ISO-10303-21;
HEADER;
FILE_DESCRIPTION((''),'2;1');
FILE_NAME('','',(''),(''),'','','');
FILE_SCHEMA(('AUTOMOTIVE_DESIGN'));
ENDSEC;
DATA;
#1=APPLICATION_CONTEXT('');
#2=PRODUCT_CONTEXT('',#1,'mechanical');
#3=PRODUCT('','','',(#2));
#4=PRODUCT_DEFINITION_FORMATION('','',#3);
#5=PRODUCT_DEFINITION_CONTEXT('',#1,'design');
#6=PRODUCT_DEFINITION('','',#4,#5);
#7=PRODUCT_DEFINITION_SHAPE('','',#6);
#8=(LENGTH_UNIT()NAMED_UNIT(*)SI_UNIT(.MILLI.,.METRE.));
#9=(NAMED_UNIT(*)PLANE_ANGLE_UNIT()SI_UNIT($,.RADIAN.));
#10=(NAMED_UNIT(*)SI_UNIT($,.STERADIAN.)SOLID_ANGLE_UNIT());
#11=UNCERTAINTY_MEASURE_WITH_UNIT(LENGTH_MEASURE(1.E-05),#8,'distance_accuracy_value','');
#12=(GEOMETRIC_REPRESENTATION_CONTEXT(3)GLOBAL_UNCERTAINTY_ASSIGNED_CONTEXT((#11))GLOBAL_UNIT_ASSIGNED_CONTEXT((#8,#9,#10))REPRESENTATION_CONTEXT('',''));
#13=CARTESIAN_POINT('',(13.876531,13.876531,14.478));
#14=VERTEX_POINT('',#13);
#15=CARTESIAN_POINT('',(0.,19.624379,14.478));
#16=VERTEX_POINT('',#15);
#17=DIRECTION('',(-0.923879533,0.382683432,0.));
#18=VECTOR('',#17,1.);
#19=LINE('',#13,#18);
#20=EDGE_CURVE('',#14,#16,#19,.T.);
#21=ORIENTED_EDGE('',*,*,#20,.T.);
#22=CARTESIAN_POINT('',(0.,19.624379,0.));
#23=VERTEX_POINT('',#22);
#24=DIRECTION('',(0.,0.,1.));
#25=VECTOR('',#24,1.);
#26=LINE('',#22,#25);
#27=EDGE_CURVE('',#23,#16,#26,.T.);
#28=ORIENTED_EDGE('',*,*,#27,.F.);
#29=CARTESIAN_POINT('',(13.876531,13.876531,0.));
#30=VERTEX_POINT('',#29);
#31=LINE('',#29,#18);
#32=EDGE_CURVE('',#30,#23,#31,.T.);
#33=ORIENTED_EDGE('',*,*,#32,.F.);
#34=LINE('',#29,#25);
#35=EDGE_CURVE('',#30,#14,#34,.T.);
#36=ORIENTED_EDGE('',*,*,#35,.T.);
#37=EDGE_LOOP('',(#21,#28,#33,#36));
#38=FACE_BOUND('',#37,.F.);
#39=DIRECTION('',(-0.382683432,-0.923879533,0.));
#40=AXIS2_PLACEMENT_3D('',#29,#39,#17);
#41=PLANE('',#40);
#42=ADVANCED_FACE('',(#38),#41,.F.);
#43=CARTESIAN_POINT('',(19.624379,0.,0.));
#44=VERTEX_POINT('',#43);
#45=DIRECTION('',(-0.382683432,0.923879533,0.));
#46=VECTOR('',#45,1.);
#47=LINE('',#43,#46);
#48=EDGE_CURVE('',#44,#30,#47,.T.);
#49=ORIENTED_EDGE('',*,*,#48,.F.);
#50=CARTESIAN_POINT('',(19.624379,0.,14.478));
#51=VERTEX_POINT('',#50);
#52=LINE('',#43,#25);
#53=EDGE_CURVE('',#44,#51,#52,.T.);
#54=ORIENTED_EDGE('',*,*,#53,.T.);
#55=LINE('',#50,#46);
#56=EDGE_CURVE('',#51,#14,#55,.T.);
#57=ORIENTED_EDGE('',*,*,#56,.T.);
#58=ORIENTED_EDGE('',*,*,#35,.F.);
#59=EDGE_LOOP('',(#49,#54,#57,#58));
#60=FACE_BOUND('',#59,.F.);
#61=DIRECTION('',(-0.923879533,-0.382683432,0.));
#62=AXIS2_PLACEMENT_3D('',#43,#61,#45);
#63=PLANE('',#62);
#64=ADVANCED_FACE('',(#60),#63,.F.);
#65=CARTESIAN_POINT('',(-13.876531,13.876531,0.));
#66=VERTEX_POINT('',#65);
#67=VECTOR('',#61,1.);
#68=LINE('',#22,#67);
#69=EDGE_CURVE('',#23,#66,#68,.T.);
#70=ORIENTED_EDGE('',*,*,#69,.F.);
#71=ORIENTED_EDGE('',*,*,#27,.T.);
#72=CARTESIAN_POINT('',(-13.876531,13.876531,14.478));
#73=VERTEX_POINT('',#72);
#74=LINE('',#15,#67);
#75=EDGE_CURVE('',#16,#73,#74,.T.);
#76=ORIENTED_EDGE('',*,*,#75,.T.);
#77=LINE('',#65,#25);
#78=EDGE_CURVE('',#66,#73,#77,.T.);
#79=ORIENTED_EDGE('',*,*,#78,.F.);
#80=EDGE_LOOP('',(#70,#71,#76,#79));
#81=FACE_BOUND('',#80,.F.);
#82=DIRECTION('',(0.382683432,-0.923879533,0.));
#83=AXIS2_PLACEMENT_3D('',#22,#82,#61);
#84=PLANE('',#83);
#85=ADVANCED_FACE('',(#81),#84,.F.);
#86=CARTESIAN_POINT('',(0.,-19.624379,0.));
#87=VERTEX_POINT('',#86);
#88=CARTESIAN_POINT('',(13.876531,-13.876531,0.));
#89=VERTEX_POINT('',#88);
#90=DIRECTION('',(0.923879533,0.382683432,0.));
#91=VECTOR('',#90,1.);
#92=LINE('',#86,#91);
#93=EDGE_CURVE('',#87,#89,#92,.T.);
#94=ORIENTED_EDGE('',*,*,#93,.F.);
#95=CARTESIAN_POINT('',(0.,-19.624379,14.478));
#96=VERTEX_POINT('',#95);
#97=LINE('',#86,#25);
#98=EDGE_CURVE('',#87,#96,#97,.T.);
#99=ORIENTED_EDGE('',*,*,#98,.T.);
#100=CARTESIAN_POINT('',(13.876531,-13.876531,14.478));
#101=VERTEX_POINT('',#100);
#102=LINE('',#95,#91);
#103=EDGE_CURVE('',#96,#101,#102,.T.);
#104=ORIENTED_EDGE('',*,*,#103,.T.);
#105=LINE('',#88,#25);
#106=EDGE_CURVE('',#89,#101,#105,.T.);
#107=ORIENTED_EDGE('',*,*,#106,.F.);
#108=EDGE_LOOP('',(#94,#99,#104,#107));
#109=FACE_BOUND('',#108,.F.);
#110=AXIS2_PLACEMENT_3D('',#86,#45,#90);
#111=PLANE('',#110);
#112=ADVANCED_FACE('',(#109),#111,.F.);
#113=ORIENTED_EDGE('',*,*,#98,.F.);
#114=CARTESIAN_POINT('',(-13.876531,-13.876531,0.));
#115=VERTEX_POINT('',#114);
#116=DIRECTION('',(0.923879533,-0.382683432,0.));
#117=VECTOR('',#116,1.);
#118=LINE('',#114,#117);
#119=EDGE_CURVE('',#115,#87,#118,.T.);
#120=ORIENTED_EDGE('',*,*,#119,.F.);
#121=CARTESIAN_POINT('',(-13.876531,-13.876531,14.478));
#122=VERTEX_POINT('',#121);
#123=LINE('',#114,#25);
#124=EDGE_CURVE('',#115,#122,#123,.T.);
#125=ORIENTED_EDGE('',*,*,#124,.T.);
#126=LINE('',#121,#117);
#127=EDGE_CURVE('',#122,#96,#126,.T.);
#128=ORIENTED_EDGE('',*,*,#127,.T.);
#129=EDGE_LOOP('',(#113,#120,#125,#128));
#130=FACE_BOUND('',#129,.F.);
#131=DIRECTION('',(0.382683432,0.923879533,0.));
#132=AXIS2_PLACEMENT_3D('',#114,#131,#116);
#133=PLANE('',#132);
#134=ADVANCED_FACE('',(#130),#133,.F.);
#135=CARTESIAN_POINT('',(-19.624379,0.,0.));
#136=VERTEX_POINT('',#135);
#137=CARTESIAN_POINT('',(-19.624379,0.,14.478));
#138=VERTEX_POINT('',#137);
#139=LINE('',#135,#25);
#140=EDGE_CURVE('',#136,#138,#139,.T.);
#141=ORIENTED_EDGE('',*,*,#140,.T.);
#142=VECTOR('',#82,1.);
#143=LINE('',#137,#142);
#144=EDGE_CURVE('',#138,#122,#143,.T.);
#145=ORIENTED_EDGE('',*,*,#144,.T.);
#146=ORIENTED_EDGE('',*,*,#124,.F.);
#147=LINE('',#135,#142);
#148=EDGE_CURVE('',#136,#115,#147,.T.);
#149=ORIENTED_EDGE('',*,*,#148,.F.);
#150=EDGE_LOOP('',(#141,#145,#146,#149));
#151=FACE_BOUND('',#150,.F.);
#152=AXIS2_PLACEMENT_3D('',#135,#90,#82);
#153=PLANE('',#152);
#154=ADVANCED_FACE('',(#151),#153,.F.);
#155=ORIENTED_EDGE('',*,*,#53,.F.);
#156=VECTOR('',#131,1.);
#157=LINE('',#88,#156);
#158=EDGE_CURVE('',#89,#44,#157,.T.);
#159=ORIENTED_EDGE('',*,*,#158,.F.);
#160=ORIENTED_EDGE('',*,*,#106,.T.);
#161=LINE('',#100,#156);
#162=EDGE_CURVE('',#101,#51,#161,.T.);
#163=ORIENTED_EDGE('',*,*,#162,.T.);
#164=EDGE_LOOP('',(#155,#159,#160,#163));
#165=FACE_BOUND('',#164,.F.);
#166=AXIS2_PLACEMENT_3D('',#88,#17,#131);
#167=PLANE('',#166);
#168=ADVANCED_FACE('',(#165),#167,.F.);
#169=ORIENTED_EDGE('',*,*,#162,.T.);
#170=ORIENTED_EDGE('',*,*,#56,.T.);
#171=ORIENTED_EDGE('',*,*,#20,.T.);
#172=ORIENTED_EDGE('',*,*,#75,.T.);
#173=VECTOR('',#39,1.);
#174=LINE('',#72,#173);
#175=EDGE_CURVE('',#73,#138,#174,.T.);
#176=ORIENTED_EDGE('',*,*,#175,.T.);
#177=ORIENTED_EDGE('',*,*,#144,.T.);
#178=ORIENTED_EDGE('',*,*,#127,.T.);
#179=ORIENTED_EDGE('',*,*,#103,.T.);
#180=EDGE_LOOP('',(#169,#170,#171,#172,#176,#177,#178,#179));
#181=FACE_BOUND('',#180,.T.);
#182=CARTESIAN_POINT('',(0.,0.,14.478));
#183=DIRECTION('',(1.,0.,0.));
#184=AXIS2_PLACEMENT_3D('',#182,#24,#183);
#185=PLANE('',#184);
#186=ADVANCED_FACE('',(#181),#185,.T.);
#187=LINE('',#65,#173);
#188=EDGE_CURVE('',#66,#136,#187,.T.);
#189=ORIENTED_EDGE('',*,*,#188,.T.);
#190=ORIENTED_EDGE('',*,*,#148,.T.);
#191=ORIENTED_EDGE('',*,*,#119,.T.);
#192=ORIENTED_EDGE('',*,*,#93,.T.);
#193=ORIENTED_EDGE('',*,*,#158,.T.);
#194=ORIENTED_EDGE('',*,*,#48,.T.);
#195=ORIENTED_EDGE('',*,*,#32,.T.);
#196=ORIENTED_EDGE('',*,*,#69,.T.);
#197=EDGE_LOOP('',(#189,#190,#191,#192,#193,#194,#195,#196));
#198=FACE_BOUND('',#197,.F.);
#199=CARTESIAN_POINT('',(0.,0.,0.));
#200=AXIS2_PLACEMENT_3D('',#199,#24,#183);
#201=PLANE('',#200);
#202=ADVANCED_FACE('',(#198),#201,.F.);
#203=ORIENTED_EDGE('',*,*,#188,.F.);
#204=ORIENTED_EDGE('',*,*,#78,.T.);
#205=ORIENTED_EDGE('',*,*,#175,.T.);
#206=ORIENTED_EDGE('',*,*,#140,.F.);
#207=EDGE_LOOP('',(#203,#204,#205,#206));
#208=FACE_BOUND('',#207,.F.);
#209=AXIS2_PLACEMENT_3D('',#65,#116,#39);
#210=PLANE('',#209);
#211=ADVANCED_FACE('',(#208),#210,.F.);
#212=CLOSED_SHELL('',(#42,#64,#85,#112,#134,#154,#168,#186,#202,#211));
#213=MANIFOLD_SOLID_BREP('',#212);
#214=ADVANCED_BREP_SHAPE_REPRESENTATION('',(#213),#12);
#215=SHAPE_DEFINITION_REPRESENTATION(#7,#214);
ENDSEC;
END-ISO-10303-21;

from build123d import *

# Parameters (mm, degrees)
F0_R     = 11.2476084484
F1_DEPTH = 14.478


# Not quite as in the source:
# - a feature of the source that left no trace in its solid (it failed there, or was rolled back) is left out


with BuildPart() as f1:
    # F0 (on Top) → F1 (new body)
    with BuildSketch(Plane.XY):
        Polygon((13.876531439, -13.876531439), (19.6243789597, 0), (13.876531439, 13.876531439), (0, 19.6243789597), (-13.876531439, 13.876531439), (-19.6243789597, 0), (-13.876531439, -13.876531439), (0, -19.6243789597), align=None)
        Circle(F0_R, mode=Mode.SUBTRACT)
        Circle(F0_R)
    extrude(amount=F1_DEPTH)


solid = f1.part
